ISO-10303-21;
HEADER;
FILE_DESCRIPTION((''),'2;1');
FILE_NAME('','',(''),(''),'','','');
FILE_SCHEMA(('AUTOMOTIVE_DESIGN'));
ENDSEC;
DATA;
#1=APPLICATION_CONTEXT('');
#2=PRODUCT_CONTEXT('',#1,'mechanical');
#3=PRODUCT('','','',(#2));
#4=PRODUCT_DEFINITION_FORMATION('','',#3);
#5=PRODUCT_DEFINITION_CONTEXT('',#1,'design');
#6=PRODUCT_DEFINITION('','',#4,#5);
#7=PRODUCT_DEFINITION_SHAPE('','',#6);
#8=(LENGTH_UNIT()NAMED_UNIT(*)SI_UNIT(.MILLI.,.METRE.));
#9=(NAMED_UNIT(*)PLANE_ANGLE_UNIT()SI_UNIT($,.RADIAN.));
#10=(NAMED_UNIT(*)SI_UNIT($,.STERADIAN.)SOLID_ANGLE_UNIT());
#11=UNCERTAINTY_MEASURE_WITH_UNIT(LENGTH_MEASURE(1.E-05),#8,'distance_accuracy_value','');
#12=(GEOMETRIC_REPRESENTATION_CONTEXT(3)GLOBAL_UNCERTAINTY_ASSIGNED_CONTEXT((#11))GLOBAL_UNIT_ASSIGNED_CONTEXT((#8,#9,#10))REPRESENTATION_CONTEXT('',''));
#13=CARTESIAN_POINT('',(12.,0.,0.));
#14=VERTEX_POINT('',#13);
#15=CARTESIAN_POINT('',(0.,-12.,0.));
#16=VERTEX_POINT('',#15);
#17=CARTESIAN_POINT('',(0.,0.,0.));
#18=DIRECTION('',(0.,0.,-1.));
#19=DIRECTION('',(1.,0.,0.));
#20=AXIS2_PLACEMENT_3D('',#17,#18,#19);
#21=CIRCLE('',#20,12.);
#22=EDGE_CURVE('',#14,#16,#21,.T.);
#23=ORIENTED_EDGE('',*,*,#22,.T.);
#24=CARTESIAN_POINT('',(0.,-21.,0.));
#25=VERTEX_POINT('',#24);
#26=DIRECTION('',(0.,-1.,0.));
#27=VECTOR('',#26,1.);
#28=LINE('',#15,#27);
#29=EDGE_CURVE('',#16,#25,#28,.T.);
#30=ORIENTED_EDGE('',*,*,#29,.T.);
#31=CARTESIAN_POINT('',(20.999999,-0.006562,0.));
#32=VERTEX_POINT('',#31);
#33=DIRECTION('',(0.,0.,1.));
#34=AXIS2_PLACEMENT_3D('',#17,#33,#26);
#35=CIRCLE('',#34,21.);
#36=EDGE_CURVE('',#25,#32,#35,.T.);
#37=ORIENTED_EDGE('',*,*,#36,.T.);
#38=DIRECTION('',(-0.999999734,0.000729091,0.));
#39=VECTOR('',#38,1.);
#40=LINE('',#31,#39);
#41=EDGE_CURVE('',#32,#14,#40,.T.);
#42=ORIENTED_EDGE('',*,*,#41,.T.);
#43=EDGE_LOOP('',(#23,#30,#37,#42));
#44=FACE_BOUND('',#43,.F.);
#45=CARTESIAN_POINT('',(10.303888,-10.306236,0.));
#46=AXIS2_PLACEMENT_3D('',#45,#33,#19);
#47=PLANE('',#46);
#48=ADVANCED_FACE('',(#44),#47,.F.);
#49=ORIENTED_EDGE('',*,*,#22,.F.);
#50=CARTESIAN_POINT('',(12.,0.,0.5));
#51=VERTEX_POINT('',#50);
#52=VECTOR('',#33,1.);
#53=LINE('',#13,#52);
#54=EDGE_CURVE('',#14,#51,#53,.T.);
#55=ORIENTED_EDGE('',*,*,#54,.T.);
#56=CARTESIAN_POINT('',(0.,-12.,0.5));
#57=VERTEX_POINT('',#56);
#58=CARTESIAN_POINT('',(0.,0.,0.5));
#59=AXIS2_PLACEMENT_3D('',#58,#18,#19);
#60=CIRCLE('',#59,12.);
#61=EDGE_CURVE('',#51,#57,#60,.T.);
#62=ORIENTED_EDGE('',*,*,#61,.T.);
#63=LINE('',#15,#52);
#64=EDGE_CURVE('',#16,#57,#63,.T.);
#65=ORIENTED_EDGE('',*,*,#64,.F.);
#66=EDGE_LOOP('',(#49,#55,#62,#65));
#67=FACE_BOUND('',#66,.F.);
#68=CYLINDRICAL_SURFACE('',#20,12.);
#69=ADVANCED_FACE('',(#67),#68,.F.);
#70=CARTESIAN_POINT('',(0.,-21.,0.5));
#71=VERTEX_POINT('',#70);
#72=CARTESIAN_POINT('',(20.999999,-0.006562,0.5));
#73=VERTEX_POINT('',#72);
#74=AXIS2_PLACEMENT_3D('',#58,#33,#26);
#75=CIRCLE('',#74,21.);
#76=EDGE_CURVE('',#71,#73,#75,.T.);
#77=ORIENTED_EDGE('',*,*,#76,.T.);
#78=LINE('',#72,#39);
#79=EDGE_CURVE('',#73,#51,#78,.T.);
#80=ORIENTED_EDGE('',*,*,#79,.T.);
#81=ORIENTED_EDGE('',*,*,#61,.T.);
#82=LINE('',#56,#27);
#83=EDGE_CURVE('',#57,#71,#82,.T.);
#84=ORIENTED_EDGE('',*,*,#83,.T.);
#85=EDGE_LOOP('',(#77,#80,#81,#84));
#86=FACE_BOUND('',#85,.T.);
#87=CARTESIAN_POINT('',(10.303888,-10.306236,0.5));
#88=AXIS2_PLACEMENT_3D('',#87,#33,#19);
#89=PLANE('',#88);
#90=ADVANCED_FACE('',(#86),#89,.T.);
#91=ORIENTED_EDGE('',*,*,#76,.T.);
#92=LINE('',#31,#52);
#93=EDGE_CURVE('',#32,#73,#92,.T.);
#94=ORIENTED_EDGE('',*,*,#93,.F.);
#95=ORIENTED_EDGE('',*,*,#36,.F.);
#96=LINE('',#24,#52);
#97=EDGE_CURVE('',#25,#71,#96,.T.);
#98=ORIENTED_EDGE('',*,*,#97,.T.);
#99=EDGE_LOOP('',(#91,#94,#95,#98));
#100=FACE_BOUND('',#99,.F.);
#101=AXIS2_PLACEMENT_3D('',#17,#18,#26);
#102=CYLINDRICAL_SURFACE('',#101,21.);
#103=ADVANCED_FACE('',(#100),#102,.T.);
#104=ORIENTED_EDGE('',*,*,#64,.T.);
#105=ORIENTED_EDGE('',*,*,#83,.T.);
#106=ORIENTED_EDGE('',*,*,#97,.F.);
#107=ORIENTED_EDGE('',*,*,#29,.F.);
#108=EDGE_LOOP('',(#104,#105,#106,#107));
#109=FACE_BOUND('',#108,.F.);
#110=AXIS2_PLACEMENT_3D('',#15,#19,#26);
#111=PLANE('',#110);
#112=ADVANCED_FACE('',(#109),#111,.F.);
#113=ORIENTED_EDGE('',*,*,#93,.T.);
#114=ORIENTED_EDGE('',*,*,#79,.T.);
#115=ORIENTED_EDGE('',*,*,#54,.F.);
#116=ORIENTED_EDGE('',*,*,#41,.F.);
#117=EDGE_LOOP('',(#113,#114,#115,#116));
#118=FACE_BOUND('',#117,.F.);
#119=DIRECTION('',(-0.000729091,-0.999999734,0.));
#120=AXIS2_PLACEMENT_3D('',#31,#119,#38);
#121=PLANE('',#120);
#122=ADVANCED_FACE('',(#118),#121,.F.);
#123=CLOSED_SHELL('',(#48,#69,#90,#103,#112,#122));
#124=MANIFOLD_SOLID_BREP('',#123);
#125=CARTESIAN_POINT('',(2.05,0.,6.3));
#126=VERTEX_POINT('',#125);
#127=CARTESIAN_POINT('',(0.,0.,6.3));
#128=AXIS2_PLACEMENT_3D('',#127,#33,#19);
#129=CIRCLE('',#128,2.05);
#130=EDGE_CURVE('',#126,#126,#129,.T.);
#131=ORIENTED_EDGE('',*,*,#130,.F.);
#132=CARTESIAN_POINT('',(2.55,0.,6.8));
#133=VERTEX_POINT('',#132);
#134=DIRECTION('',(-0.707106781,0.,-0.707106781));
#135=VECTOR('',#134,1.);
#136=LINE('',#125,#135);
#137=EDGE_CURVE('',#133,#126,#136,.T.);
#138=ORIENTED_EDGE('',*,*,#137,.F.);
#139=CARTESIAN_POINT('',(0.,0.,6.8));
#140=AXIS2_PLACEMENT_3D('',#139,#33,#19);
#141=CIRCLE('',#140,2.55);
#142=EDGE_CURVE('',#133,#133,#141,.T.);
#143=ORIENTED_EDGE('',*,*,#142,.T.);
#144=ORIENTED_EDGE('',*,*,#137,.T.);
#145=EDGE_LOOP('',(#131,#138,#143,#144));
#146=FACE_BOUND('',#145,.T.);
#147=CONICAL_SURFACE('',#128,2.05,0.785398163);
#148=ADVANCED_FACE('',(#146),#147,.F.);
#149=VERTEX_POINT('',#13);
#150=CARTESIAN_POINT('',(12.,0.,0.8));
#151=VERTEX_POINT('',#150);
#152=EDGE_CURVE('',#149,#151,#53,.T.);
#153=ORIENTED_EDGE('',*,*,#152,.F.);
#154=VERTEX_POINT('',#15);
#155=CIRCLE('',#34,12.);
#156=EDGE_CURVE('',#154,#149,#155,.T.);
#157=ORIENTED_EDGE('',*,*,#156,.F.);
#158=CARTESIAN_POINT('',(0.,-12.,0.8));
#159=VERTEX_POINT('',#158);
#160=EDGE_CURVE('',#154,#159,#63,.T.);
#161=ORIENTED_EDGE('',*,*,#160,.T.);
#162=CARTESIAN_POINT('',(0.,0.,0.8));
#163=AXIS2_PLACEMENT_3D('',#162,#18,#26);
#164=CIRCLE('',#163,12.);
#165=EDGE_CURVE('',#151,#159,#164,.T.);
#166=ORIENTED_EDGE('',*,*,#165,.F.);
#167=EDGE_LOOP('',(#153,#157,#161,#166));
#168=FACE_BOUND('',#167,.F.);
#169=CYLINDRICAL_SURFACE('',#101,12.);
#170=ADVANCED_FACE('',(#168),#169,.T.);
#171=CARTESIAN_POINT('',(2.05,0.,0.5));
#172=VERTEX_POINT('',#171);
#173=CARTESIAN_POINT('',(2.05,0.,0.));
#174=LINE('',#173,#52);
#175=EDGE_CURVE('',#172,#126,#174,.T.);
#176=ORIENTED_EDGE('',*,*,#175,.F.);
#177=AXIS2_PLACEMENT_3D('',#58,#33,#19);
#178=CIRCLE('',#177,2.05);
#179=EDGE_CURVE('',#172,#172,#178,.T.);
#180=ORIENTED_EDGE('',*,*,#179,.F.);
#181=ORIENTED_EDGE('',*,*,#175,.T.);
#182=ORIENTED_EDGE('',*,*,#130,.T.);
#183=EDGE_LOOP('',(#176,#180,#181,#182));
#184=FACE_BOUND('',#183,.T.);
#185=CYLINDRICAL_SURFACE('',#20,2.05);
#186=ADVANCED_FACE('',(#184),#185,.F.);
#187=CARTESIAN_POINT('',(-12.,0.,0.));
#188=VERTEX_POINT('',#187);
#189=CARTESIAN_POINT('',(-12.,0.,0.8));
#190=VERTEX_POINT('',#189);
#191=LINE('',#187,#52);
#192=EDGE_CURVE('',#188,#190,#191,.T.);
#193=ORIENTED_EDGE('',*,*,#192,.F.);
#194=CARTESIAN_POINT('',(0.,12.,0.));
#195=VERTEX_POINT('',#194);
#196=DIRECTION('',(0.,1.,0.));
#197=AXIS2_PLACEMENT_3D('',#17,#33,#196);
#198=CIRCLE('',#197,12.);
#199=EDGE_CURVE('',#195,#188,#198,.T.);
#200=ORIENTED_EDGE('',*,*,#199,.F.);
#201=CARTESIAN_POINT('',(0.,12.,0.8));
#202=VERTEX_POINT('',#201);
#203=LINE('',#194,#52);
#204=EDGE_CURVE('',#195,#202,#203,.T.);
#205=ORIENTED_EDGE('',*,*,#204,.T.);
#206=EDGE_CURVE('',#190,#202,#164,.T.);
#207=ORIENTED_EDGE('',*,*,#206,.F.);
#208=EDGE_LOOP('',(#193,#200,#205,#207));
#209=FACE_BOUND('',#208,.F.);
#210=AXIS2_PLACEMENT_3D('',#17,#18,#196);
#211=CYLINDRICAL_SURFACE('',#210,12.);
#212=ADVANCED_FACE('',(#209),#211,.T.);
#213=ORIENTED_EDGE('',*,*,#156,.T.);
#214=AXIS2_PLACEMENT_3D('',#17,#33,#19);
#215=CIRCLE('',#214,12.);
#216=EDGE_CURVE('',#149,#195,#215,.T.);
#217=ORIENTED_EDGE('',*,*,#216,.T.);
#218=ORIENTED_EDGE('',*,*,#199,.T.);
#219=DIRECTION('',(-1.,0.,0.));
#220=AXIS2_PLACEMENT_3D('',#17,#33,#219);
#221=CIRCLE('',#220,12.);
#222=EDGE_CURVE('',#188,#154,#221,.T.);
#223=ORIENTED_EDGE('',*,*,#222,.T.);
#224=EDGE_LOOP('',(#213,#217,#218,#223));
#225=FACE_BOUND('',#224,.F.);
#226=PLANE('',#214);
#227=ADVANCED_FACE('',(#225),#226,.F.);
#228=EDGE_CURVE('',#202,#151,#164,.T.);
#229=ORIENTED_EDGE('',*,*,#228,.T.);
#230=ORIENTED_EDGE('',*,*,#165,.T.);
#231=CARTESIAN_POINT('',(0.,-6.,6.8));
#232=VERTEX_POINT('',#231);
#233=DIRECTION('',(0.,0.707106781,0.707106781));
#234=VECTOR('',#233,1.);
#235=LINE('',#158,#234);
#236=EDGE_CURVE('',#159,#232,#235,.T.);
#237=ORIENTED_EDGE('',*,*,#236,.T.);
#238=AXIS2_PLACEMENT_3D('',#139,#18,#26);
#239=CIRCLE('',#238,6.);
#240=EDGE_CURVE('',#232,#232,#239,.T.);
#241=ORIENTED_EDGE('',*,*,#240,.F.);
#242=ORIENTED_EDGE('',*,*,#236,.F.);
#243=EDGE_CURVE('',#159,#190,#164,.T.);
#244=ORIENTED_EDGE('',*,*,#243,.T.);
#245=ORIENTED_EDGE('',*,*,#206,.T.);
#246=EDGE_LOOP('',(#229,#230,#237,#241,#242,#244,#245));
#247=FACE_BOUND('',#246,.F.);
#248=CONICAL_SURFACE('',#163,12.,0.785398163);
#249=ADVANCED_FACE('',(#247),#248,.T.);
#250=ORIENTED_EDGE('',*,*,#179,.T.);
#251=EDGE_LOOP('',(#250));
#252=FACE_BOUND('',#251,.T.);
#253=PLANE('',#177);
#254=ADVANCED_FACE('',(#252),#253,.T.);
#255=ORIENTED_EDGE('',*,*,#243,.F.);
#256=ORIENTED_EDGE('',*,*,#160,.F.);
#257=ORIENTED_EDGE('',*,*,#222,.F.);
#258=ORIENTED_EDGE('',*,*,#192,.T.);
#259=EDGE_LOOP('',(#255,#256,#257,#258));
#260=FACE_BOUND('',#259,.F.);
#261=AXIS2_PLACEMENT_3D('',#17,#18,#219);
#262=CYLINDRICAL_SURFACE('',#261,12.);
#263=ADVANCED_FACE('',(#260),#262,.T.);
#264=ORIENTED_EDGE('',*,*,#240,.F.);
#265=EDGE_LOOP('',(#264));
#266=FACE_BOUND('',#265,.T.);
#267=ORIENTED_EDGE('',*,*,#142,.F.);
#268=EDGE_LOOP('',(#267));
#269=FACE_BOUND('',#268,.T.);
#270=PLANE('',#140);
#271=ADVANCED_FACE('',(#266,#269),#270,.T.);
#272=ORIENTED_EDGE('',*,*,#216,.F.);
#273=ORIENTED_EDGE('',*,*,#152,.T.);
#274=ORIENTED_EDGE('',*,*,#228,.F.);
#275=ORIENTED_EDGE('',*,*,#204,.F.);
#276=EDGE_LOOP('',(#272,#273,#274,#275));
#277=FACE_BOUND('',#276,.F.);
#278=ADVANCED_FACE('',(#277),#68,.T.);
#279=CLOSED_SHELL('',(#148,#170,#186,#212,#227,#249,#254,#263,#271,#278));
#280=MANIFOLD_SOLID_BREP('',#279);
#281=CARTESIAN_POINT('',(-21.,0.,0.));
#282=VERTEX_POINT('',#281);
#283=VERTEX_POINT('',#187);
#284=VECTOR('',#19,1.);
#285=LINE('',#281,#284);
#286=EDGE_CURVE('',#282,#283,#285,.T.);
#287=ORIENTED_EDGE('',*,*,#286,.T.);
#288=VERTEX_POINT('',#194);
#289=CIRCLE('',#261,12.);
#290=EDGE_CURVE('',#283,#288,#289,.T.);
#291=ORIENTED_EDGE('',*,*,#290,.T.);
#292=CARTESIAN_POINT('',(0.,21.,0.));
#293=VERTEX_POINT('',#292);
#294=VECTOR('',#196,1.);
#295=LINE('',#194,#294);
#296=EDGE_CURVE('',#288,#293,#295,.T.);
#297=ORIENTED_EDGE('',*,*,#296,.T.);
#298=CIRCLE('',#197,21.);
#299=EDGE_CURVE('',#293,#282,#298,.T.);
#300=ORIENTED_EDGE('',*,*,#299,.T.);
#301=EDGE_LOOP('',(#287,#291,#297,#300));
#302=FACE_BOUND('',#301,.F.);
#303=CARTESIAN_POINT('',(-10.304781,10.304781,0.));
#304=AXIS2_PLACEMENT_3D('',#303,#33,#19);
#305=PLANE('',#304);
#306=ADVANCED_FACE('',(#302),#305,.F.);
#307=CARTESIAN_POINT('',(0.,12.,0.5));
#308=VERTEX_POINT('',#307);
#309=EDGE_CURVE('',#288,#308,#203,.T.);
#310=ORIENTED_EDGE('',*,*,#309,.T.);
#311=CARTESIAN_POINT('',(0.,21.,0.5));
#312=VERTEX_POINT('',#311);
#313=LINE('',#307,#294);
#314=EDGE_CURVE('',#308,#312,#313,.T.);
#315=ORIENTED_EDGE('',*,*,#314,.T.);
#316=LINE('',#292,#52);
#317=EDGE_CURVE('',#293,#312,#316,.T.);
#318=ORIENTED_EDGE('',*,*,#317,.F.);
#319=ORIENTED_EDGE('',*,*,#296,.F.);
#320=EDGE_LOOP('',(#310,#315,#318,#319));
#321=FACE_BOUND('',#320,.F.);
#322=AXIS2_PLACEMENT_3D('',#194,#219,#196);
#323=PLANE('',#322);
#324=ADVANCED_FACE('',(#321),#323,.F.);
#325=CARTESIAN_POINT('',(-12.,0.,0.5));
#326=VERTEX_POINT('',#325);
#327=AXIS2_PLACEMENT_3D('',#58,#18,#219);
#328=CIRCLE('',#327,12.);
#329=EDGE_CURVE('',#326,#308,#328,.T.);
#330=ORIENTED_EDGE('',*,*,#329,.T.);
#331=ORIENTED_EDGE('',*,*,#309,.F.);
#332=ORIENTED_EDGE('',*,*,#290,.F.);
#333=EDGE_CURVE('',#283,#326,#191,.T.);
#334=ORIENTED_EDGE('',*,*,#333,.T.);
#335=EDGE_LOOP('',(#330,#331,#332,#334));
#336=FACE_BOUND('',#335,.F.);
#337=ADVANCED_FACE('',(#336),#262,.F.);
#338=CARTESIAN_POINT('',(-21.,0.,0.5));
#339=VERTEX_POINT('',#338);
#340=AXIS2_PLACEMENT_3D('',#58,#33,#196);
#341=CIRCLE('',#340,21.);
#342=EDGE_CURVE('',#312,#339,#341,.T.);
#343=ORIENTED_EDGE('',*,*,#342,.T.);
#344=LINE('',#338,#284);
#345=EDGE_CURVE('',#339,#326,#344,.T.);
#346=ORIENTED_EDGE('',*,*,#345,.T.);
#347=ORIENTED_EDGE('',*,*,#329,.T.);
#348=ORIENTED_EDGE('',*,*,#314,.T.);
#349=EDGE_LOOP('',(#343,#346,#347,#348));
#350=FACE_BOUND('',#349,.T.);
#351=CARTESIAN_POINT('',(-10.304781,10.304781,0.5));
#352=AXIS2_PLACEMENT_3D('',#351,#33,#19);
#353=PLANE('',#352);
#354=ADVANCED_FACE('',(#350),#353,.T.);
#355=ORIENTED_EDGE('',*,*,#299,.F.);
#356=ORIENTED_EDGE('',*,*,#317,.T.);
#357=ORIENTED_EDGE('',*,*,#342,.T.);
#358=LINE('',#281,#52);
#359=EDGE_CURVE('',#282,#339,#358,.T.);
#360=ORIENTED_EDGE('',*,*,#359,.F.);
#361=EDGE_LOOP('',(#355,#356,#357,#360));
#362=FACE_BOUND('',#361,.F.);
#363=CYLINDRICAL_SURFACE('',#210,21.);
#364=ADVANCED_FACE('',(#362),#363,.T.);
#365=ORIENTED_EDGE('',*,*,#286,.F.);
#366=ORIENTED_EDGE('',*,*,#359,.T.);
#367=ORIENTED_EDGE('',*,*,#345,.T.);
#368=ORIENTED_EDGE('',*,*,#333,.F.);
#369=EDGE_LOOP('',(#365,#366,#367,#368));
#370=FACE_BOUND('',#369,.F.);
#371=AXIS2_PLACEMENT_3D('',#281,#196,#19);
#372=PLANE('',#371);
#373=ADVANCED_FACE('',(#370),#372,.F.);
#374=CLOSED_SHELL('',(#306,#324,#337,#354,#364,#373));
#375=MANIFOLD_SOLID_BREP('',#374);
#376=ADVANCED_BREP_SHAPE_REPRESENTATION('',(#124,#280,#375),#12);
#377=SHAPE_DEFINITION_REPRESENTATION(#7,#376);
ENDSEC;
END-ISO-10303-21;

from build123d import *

# Parameters (mm, degrees)
F0_R     = 2.05
F1_DEPTH = 0.5
F2_DEPTH = 6.8
F4_SIZE  = 0.5


# Not quite as in the source:
# - a fillet or chamfer that OpenCascade refuses, or shapes differently, is made with other operations: its cross-section is extruded or revolved along the edge and cut away or added


with BuildPart() as f1:
    # F0 (on Top) → F1 (new body)
    with BuildSketch(Plane.XY):
        Circle(F0_R)
    extrude(amount=F1_DEPTH)

    # F0 (on Top) → F2 (join)
    with BuildSketch(Plane.XY):
        with BuildLine():
            ThreePointArc((0, -12), (8.4852813742, -8.4852813742), (12, 0))
            ThreePointArc((12, 0), (8.4852813742, 8.4852813742), (0, 12))
            ThreePointArc((0, 12), (-8.4852813742, 8.4852813742), (-12, 0))
            ThreePointArc((-12, 0), (-8.4852813742, -8.4852813742), (0, -12))
        make_face()
        Circle(F0_R, mode=Mode.SUBTRACT)
    extrude(amount=F2_DEPTH)

    # F3: chamfer of 6 on 1 edges, made by hand

    # F3_s1 → F3_t2 (revolve, cut)
    with BuildSketch(Plane.YZ):
        Polygon((-12, 0.8), (-6, 6.8), (-12, 6.8), align=None)
    revolve(axis=Axis((0, 0, 6.8), (0, 0, -1)), mode=Mode.SUBTRACT)

    # F4
    f4_edges = [f1.edges().sort_by_distance(p)[0] for p in [
        (-2.05, 0, 6.8),
    ]]
    chamfer(f4_edges, length=F4_SIZE)


with BuildPart() as f1b:
    # F0 (on Top) → F1, piece 2 (new body)
    with BuildSketch(Plane.XY):
        with BuildLine():
            Line((20.9999989748, -0.0065618185), (12, 0))
            ThreePointArc((12, 0), (8.4852813742, -8.4852813742), (0, -12))
            Line((0, -12), (0, -21))
            ThreePointArc((0, -21), (14.8469222705, -14.8515621769), (20.9999989748, -0.0065618185))
        make_face()
    extrude(amount=F1_DEPTH)


with BuildPart() as f1c:
    # F0 (on Top) → F1, piece 3 (new body)
    with BuildSketch(Plane.XY):
        with BuildLine():
            ThreePointArc((-12, 0), (-8.4852813742, 8.4852813742), (0, 12))
            Line((0, 12), (0, 21))
            ThreePointArc((0, 21), (-14.8492424049, 14.8492424049), (-21, 0))
            Line((-21, 0), (-12, 0))
        make_face()
    extrude(amount=F1_DEPTH)


solid = Compound([f1.part, f1b.part, f1c.part])
